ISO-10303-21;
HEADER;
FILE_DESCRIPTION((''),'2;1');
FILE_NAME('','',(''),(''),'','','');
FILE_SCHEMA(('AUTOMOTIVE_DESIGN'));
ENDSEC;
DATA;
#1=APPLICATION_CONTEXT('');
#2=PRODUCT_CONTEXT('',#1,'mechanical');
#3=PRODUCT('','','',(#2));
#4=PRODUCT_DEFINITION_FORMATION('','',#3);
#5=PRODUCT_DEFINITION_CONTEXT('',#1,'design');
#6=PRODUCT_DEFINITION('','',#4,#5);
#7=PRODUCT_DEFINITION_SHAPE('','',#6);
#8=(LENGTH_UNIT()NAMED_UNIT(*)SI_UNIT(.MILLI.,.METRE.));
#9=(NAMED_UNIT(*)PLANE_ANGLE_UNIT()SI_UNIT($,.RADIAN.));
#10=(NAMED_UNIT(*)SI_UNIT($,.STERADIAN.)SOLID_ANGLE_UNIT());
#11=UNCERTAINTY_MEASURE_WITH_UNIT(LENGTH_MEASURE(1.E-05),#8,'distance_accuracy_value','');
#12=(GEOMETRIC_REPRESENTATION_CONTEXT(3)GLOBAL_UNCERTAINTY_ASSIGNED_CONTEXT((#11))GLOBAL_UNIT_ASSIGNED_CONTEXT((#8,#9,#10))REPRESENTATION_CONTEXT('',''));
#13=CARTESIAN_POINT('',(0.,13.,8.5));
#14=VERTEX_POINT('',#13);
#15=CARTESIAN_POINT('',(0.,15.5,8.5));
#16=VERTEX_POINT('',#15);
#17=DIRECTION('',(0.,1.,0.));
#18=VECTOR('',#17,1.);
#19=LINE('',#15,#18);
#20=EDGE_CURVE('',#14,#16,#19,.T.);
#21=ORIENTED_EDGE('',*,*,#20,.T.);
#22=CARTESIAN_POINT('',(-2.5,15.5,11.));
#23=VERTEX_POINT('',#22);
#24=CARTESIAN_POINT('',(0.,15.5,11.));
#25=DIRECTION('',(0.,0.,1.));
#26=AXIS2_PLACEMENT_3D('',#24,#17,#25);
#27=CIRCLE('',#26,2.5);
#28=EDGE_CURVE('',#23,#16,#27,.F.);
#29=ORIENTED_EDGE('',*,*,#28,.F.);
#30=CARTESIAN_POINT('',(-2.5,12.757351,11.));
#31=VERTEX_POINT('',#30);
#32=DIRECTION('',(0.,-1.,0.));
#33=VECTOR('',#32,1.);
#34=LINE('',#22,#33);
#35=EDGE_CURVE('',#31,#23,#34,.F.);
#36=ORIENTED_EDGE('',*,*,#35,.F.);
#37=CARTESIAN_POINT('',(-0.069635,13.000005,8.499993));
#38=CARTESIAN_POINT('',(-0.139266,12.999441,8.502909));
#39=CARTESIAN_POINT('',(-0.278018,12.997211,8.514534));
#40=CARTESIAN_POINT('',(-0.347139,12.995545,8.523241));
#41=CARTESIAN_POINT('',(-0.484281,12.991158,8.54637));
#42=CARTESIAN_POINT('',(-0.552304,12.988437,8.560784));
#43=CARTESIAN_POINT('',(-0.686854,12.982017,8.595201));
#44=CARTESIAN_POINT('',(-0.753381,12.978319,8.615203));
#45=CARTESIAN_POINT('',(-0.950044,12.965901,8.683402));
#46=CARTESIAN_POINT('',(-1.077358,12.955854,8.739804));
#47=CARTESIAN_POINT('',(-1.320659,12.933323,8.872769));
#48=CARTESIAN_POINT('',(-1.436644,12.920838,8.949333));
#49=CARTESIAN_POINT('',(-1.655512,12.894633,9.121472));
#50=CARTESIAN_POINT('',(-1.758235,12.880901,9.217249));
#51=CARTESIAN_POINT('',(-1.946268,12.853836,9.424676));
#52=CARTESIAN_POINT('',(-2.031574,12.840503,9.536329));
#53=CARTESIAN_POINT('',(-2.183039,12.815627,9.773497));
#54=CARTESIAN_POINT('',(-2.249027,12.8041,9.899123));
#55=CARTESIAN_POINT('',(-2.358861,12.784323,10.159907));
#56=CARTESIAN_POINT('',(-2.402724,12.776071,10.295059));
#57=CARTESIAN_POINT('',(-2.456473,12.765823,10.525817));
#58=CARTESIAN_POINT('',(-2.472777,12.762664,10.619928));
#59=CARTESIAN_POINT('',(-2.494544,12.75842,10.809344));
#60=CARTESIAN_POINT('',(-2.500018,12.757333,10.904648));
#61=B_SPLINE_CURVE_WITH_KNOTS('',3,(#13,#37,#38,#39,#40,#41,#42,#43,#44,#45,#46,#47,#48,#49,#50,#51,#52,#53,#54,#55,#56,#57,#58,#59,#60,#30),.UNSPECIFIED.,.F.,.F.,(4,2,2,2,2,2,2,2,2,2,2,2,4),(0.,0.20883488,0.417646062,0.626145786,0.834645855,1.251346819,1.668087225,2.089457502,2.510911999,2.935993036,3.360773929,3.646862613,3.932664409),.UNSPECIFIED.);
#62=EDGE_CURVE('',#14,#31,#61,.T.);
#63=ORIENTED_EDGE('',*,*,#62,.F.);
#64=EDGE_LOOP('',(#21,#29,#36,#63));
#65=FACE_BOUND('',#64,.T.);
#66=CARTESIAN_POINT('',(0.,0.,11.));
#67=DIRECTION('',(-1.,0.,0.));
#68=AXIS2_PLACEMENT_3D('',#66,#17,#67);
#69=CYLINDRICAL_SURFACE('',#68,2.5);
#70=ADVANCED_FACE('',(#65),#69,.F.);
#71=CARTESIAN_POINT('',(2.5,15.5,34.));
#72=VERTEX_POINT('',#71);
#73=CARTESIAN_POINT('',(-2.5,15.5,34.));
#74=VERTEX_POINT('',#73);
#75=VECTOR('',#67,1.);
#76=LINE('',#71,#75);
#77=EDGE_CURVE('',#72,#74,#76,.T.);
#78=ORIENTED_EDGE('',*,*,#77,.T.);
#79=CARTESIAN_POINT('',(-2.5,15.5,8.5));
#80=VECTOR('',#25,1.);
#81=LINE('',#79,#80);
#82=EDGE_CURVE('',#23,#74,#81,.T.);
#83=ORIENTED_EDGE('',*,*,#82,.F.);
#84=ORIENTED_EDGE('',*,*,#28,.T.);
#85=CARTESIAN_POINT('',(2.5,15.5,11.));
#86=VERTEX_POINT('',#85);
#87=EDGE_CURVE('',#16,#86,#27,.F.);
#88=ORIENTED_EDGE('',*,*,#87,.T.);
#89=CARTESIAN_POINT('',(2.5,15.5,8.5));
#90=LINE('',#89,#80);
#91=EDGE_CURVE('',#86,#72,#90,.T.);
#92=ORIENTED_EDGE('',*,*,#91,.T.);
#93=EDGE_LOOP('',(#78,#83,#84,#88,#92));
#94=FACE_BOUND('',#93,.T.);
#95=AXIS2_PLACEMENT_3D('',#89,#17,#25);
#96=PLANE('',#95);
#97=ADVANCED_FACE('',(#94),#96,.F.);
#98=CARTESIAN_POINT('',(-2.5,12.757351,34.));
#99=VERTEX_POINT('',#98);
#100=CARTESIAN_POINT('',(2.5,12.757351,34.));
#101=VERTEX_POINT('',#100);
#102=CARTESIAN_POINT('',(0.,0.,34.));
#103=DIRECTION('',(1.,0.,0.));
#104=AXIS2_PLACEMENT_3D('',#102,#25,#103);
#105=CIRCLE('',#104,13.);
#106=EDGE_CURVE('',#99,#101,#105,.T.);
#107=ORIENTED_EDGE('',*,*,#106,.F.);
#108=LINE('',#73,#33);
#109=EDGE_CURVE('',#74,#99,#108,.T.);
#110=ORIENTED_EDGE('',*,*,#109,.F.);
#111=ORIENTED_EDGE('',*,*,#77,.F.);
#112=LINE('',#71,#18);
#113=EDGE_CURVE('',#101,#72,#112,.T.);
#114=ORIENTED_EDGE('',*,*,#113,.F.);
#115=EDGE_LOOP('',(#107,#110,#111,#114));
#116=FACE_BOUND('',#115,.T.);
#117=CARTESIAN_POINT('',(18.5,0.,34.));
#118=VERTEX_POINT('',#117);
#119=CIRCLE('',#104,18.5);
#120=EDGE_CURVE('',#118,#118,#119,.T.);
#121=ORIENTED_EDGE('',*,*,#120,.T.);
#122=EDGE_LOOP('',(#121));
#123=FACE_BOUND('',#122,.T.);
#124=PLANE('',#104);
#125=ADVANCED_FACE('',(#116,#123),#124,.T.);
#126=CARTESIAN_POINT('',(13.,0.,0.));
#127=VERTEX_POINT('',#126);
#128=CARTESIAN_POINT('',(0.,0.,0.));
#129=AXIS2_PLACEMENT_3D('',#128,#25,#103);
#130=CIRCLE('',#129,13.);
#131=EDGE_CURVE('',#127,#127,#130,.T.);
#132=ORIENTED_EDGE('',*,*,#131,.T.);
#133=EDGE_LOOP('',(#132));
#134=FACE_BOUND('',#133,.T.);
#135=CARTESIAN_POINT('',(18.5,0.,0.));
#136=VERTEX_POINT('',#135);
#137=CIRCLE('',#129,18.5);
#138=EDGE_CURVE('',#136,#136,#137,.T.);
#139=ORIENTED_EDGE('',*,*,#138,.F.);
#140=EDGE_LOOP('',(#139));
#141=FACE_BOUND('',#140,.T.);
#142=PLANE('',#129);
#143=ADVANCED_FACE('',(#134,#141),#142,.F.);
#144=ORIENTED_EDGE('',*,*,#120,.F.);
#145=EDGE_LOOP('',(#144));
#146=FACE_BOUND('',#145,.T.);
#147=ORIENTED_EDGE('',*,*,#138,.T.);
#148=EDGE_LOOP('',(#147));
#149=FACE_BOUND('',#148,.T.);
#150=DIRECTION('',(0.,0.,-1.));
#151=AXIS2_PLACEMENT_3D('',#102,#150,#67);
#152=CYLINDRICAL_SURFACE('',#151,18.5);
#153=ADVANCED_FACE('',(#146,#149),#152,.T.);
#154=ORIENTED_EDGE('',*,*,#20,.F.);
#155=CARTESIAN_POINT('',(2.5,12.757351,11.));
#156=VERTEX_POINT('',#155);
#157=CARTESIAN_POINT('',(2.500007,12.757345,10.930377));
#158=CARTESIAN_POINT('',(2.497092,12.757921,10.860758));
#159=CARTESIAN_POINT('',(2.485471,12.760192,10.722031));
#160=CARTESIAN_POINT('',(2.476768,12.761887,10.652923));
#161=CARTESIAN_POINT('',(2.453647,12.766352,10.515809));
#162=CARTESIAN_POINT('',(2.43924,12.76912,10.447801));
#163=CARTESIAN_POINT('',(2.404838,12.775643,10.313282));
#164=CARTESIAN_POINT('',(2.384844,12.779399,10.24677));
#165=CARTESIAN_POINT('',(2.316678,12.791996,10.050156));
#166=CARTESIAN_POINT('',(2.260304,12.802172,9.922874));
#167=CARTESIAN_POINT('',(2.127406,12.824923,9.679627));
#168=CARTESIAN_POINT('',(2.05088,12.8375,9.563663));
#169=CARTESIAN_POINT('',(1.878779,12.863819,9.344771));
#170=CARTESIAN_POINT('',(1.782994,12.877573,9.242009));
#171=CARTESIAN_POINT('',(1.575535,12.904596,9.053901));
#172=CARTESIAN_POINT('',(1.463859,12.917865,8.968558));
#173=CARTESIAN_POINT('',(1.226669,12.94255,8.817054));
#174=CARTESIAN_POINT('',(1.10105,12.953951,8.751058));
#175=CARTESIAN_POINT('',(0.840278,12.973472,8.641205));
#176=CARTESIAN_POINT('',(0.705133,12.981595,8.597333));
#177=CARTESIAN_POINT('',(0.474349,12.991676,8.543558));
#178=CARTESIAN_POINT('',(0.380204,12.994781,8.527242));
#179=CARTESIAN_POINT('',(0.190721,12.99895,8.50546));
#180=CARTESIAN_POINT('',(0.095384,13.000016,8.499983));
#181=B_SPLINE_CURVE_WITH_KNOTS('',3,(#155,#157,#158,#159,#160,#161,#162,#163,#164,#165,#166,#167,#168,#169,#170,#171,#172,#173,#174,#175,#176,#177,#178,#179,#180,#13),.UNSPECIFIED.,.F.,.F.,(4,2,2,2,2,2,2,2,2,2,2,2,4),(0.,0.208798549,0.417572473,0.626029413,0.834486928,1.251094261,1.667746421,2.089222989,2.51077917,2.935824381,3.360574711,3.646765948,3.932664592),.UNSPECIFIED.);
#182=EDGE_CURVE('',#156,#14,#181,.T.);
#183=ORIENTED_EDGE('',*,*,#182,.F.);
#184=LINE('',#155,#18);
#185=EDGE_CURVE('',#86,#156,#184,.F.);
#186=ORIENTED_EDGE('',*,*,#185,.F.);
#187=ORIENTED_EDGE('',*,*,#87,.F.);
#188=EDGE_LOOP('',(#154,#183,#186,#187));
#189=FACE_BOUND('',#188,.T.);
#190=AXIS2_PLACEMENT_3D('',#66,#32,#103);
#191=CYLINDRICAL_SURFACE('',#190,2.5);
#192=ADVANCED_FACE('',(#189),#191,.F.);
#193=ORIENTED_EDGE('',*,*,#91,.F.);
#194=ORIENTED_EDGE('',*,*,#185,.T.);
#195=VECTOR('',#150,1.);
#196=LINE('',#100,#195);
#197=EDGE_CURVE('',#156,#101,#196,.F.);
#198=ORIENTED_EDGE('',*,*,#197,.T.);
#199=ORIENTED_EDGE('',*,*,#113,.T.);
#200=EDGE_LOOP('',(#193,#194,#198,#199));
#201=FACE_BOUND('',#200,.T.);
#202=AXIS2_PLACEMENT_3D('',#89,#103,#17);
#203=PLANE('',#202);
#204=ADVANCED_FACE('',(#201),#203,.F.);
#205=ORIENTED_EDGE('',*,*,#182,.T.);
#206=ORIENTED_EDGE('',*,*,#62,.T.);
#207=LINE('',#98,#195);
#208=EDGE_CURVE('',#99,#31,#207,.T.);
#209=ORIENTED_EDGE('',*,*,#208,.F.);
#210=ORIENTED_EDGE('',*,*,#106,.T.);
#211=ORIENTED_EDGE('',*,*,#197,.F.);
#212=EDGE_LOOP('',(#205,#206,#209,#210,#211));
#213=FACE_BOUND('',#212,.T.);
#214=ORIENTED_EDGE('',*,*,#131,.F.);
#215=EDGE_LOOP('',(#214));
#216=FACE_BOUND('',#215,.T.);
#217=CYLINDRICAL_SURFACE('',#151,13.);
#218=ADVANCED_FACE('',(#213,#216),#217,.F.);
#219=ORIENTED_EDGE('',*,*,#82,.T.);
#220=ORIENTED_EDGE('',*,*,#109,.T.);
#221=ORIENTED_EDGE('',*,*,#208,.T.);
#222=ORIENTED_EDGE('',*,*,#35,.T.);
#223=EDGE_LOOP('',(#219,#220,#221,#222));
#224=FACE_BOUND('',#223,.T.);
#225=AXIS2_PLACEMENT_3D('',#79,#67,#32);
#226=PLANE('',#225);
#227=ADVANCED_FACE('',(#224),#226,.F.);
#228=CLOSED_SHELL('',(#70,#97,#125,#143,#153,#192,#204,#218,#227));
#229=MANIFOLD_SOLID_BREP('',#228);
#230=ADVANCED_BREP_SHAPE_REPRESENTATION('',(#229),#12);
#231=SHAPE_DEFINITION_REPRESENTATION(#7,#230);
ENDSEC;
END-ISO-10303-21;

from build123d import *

# Parameters (mm, degrees)
SKETCH1_R           = 18.5
SKETCH1_R_2         = 13
BOSS_EXTRUDE1_DEPTH = 34
SKETCH2_W           = 5
SKETCH2_H           = 5
CUT_EXTRUDE1_DEPTH  = 25.5
FILLET2_R           = 2.5
FILLET3_R           = 2.5


with BuildPart() as part:
    # Sketch1 → Boss-Extrude1 (new body)
    with BuildSketch(Plane.XY):
        Circle(SKETCH1_R)
        Circle(SKETCH1_R_2, mode=Mode.SUBTRACT)
    extrude(amount=BOSS_EXTRUDE1_DEPTH)

    # Sketch2 → Cut-Extrude1 (cut)
    with BuildSketch(Plane.XY.offset(34)):
        with Locations((0, 13)):
            Rectangle(SKETCH2_W, SKETCH2_H)
    extrude(amount=-CUT_EXTRUDE1_DEPTH, mode=Mode.SUBTRACT)

    # Fillet2
    fillet2_edges = [part.edges().sort_by_distance(p)[0] for p in [
        (2.5, 14.128675411, 8.5),
    ]]
    fillet(fillet2_edges, radius=FILLET2_R)

    # Fillet3
    fillet3_edges = [part.edges().sort_by_distance(p)[0] for p in [
        (-2.5, 14.128675411, 8.5),
    ]]
    fillet(fillet3_edges, radius=FILLET3_R - 0.0001)  # a hair under: the kernel refuses the full size


solid = part.part
